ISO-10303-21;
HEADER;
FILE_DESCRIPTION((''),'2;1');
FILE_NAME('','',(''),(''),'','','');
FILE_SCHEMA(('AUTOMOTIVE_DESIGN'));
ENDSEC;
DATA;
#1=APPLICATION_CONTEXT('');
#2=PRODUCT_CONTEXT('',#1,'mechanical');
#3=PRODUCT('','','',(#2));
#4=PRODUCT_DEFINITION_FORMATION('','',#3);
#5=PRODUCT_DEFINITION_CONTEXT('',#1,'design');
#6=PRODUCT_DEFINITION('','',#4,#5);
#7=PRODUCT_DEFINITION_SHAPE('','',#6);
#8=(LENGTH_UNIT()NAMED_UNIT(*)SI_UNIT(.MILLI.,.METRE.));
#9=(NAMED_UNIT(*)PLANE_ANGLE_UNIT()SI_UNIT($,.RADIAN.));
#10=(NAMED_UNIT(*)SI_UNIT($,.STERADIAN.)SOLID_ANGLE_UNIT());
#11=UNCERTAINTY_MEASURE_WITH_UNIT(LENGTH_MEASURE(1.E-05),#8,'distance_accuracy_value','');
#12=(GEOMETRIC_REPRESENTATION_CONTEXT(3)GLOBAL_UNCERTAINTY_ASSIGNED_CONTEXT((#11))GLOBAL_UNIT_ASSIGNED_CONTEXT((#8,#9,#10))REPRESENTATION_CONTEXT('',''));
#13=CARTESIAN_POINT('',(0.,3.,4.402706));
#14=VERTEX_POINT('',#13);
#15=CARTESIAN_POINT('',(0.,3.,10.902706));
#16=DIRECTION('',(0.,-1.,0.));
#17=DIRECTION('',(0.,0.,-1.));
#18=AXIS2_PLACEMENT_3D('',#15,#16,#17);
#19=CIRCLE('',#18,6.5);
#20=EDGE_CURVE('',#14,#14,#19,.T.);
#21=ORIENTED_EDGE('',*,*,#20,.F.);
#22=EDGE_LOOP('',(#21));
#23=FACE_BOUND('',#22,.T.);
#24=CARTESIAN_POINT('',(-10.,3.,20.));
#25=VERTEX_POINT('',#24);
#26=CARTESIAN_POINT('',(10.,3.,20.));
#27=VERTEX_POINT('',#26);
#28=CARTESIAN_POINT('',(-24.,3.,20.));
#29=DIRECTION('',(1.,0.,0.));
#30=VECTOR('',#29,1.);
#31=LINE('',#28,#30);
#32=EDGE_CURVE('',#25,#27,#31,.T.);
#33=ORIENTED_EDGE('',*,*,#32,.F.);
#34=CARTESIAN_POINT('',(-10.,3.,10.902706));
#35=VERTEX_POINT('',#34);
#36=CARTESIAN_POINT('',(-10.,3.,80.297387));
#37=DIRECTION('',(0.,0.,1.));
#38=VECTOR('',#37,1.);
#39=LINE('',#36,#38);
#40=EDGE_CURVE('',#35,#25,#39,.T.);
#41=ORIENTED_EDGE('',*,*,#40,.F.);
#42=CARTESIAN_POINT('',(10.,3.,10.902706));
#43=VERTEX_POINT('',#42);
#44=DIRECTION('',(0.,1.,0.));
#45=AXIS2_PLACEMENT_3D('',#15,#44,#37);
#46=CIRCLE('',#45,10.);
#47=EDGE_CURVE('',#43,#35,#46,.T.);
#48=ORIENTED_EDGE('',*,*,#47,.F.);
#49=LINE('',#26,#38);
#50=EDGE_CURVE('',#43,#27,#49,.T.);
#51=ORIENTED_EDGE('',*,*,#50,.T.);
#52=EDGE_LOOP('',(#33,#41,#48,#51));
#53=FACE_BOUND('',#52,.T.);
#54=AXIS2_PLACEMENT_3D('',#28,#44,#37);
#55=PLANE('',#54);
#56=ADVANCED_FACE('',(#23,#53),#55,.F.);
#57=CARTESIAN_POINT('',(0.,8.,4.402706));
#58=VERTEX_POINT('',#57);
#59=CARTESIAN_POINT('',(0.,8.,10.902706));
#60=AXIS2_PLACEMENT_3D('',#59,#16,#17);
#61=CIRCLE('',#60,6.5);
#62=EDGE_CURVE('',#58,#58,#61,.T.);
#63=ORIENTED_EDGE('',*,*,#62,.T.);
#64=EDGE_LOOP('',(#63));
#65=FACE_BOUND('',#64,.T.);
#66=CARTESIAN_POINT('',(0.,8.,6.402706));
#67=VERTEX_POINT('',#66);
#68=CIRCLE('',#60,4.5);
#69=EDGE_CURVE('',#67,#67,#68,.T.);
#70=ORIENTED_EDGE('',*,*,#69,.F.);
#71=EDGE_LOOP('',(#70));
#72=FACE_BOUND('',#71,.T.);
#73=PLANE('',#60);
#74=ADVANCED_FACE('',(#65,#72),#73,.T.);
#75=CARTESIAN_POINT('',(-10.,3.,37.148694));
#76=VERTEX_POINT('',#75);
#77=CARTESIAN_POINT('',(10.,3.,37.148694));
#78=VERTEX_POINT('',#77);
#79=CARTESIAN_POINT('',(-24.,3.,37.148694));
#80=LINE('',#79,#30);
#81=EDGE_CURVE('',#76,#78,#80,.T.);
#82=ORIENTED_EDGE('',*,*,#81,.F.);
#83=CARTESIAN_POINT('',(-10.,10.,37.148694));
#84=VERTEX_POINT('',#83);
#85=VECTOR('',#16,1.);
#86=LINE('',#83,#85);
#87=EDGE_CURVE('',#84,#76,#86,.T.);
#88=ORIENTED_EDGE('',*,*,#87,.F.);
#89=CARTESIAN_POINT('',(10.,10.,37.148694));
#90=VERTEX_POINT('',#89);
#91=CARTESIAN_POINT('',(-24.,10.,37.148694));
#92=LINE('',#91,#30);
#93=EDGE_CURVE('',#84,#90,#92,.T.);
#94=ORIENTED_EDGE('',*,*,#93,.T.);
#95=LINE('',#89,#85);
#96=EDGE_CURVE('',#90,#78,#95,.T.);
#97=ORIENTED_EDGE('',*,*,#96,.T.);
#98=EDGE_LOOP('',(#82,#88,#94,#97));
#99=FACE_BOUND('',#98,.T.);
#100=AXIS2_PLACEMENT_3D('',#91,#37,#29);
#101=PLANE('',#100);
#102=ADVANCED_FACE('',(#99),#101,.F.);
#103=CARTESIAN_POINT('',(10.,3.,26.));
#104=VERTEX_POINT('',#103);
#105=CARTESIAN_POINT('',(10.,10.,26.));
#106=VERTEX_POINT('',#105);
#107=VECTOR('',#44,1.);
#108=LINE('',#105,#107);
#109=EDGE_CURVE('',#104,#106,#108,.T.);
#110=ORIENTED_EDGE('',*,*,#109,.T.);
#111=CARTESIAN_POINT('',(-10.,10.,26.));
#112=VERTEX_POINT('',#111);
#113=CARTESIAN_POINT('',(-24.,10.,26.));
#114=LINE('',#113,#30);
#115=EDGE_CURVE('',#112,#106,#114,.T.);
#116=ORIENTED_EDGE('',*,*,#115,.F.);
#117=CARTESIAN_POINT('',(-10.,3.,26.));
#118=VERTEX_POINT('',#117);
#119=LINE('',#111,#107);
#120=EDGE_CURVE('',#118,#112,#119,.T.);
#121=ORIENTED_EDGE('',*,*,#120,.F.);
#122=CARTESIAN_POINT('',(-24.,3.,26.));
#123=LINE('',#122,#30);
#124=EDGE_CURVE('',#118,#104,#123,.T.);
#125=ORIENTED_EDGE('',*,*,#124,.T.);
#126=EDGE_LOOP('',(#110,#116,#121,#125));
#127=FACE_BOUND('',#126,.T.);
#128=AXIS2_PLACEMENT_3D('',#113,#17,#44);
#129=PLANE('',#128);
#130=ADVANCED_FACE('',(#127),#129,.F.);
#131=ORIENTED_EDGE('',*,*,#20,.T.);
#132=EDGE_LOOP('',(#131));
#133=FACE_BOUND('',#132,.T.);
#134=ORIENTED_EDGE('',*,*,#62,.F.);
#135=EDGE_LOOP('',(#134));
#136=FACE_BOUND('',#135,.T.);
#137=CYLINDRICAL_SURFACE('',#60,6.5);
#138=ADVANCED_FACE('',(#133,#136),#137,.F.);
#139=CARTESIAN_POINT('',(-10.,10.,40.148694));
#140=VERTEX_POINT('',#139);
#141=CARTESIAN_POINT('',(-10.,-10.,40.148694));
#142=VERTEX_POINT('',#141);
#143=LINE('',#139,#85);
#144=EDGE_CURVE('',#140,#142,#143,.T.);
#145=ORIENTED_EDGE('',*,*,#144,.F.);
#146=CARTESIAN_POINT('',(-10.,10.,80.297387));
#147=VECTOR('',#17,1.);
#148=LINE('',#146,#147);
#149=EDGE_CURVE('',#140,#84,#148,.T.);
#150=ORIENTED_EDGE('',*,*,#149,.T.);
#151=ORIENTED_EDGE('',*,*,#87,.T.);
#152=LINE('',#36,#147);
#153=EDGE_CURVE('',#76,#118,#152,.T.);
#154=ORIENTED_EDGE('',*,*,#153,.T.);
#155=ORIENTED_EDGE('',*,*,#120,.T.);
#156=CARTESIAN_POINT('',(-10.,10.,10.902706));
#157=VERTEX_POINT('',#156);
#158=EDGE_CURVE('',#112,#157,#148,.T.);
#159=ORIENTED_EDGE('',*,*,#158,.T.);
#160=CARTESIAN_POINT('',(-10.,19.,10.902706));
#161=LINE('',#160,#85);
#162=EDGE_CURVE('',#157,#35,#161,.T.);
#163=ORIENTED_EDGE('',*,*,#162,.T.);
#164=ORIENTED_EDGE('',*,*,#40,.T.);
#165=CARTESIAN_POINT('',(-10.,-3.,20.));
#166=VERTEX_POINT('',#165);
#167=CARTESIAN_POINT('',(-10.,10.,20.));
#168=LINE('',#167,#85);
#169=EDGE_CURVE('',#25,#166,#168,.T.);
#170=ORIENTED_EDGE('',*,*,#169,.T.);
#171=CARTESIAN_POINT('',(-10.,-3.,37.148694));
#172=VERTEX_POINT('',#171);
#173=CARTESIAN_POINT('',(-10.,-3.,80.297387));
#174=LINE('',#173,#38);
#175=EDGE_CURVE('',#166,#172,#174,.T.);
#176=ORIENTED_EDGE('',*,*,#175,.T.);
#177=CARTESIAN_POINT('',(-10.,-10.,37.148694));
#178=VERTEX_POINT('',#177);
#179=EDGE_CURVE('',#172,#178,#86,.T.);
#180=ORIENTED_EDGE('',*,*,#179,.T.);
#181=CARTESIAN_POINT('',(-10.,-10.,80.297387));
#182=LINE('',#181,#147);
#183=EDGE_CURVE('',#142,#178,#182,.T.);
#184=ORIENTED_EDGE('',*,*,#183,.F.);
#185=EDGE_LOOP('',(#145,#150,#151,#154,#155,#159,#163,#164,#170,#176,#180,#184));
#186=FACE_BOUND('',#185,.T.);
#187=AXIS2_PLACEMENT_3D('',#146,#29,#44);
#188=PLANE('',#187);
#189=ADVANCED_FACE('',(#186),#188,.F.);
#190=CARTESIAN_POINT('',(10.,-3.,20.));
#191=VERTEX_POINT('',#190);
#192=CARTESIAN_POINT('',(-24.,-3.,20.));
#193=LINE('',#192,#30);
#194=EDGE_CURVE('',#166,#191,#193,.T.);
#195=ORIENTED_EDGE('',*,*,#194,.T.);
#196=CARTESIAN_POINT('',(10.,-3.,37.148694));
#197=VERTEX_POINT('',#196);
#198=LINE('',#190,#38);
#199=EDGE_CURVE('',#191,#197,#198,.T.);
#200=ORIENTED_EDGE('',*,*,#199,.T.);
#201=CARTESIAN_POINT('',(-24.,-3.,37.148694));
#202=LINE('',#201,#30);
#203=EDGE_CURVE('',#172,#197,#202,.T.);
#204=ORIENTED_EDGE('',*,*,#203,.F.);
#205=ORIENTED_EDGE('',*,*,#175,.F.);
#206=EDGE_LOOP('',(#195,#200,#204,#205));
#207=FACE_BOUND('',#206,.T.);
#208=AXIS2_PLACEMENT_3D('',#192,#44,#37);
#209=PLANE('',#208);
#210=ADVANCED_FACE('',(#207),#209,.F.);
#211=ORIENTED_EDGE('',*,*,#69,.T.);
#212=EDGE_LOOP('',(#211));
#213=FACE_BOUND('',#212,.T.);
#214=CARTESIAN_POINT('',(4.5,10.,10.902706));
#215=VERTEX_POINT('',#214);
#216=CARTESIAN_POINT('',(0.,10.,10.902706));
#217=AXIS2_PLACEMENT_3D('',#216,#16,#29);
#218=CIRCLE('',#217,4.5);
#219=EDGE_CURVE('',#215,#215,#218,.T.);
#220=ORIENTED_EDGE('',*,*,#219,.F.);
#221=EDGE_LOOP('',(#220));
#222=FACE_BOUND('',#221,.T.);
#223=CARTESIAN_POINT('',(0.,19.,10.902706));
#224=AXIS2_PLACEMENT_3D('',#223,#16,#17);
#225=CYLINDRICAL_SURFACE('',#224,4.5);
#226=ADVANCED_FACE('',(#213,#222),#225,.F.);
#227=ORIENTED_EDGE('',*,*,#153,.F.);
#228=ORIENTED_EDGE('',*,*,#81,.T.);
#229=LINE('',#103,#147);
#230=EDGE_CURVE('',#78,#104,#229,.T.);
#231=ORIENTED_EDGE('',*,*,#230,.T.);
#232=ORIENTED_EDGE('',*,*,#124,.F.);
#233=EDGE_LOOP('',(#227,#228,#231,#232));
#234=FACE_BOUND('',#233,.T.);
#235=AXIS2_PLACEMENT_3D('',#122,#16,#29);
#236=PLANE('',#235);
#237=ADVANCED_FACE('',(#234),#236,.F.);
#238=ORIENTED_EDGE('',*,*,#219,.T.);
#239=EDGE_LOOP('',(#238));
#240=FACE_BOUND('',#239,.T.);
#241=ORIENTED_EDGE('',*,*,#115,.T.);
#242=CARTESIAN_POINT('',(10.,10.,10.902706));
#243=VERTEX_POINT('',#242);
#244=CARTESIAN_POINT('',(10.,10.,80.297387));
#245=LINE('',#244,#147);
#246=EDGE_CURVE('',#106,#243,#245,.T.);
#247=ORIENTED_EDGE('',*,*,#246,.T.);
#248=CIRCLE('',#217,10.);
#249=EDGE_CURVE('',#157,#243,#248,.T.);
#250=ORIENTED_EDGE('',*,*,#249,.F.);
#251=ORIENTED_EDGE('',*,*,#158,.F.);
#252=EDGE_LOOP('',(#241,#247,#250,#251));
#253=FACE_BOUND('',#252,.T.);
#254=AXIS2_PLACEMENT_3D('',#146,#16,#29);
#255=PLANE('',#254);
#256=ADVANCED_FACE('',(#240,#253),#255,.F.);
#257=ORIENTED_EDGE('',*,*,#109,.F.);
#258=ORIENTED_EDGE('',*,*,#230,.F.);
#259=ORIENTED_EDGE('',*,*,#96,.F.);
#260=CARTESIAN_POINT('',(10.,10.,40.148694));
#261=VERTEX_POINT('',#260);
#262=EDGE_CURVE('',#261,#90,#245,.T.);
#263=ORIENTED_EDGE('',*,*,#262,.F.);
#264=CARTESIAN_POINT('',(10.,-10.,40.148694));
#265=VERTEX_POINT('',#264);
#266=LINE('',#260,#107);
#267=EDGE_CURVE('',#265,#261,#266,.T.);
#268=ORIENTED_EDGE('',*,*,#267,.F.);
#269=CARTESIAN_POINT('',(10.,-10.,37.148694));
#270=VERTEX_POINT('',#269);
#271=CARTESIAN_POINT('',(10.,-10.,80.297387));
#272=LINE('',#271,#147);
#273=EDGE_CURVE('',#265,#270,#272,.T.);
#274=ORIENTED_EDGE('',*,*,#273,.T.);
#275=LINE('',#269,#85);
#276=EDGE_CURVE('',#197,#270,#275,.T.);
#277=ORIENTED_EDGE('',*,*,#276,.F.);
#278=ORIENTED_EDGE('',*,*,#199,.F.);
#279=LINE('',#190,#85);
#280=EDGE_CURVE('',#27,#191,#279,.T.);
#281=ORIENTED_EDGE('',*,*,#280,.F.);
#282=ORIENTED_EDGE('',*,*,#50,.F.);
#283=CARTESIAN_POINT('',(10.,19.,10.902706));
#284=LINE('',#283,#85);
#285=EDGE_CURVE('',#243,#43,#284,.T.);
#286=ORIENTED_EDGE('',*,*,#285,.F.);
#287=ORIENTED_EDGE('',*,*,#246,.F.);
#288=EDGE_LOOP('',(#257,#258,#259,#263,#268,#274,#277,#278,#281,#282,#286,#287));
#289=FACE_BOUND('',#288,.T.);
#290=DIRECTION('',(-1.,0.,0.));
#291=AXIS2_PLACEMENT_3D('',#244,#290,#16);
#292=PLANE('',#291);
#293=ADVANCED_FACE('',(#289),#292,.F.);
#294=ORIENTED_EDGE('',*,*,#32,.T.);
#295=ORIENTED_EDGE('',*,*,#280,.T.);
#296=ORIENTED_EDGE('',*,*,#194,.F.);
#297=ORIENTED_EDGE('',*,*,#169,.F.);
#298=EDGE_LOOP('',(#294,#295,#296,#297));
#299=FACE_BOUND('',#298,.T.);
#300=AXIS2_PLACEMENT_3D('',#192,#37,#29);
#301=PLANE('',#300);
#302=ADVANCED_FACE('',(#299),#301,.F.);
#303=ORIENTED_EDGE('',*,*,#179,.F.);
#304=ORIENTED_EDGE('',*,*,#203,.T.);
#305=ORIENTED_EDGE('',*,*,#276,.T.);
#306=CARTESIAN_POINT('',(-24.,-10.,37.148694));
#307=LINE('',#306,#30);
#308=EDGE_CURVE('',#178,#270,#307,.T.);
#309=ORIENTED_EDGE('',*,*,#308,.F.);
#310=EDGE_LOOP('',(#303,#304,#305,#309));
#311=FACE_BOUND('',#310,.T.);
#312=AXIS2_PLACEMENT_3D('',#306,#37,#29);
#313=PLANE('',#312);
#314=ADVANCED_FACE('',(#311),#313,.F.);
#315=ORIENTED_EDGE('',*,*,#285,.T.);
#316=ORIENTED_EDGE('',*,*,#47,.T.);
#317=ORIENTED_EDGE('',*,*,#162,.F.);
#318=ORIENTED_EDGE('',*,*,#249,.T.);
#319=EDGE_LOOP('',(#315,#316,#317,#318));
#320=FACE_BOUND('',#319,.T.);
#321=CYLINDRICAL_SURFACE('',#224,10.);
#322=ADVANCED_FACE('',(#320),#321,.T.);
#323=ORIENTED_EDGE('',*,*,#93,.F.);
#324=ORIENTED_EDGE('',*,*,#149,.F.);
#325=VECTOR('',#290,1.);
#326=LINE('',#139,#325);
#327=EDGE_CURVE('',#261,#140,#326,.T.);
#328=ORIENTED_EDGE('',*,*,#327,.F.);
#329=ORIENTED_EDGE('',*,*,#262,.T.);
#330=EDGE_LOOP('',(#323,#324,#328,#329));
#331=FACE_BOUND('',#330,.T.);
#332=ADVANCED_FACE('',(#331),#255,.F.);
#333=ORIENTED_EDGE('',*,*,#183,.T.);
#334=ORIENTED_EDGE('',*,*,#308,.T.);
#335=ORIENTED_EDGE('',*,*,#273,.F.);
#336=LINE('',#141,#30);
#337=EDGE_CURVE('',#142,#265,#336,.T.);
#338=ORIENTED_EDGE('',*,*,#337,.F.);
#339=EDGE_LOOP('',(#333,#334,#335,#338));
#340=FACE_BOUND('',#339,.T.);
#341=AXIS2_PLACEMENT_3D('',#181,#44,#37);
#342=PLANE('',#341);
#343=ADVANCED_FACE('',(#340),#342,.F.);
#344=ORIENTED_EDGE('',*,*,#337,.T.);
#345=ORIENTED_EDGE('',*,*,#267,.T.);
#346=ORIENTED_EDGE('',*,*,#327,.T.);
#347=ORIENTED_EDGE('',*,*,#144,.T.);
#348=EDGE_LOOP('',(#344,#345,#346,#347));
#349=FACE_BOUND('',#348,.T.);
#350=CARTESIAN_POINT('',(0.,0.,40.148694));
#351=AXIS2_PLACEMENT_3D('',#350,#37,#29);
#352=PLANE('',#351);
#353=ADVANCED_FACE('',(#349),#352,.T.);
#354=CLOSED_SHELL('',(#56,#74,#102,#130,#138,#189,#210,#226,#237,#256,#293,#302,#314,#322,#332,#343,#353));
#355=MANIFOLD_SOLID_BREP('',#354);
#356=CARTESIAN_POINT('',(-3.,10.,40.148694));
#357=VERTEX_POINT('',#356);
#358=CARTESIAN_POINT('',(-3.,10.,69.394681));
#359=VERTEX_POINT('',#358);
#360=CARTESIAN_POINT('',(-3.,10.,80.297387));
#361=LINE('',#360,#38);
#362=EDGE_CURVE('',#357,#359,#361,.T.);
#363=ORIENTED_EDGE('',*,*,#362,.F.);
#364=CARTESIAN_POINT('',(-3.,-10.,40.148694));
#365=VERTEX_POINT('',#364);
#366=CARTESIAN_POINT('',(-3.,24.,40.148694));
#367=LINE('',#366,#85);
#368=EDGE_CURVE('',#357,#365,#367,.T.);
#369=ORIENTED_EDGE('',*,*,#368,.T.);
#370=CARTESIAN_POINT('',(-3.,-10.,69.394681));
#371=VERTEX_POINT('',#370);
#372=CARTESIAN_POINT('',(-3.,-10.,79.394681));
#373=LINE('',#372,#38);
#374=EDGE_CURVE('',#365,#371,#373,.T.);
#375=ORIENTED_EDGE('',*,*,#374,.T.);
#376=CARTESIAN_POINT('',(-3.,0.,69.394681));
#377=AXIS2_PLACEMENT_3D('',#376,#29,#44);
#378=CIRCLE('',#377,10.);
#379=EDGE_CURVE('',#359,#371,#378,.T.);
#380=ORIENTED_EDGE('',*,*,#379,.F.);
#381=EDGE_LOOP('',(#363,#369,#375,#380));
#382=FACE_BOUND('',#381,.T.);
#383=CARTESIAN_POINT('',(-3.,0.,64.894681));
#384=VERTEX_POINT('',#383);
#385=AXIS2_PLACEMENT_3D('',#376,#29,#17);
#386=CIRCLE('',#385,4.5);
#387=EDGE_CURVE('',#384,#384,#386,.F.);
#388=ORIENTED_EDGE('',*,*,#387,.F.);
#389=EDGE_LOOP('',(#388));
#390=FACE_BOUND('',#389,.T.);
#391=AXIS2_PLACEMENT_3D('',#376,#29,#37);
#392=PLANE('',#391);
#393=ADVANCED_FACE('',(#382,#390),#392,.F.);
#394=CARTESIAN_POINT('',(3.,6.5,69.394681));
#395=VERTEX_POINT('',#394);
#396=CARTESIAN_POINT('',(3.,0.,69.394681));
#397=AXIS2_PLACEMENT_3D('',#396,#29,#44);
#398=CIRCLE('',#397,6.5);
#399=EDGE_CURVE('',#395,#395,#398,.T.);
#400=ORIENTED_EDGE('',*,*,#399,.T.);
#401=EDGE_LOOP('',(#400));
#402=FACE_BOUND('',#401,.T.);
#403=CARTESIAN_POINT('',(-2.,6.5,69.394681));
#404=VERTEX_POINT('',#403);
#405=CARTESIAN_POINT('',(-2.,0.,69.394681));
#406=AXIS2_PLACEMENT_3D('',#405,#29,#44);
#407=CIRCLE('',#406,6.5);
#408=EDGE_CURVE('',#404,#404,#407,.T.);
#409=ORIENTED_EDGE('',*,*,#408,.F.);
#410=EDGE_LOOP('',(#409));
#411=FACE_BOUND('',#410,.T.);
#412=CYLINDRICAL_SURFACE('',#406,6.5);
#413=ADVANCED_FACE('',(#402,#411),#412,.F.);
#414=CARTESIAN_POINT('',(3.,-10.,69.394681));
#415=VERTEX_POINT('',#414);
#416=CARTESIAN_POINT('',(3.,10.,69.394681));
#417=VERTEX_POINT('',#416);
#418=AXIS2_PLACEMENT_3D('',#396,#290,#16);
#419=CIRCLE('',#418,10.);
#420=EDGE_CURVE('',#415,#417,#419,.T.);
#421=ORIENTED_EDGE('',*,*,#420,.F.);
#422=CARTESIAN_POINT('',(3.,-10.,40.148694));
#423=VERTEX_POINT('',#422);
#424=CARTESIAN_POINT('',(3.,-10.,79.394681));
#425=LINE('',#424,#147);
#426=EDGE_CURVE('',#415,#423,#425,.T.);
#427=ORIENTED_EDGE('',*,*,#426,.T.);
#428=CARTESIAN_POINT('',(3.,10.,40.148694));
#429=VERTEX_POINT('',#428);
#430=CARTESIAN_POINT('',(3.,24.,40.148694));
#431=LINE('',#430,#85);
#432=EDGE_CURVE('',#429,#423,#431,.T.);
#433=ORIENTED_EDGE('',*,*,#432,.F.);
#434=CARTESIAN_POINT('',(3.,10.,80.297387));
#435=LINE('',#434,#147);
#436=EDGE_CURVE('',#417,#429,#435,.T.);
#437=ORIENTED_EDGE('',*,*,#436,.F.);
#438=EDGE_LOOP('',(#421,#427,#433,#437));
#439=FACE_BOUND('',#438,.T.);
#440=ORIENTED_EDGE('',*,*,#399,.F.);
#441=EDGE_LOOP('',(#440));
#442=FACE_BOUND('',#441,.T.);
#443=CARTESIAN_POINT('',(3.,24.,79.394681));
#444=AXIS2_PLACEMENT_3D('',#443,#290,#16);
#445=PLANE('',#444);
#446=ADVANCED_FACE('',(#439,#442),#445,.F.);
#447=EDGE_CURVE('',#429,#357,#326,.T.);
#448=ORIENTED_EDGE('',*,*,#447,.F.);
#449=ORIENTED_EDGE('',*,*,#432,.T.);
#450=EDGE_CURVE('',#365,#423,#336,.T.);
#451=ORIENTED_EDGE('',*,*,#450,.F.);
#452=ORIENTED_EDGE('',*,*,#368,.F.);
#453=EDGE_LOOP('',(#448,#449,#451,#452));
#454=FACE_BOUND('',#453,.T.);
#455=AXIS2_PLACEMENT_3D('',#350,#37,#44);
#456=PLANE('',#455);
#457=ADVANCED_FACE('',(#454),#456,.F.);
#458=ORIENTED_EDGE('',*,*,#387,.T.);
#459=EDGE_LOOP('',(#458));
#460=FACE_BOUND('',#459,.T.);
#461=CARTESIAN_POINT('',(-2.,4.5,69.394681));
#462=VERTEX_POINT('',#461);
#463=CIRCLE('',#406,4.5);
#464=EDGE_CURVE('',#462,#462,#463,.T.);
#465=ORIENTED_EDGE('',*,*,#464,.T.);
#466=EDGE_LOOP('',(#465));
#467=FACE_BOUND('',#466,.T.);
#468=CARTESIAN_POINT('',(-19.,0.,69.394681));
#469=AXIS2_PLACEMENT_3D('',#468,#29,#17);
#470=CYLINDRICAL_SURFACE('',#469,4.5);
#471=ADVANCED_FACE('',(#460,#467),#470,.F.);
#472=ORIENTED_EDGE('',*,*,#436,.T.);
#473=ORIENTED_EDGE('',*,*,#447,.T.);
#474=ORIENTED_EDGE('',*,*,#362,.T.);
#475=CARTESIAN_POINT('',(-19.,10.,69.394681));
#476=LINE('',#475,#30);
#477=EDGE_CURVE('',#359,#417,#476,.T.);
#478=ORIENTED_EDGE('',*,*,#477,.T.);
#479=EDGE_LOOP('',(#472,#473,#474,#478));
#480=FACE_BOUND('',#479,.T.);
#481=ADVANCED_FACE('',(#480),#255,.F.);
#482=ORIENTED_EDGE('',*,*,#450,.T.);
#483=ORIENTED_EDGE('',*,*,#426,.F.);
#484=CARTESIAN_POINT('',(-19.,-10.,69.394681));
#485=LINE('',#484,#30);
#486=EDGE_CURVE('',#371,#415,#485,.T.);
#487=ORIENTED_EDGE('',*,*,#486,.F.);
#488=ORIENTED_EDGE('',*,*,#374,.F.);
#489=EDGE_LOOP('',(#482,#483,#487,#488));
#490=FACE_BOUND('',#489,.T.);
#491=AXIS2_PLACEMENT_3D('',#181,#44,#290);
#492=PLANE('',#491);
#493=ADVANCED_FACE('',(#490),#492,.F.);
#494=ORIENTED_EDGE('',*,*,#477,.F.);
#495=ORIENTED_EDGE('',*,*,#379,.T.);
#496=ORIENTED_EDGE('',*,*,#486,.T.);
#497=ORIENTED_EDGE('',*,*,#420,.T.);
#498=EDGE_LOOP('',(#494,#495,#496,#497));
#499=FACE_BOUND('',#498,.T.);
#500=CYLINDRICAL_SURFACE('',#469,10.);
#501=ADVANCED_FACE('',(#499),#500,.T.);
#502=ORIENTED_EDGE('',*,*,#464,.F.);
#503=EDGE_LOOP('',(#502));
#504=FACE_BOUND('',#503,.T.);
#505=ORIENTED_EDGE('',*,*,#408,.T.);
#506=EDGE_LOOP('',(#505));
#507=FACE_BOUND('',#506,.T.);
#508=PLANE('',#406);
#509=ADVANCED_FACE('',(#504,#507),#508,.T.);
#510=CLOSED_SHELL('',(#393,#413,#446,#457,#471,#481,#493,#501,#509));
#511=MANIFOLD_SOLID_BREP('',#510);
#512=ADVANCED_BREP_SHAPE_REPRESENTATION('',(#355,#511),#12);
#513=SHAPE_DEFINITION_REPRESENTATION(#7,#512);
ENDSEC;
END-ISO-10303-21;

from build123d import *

# Parameters (mm, degrees)
SKETCH_1_W          = 20
SKETCH_1_H          = 20
EXTRUDE_1_DEPTH     = 80.297387422
SKETCH_7_W          = 11.148693711
SKETCH_7_H          = 7
CUT_EXTRUDE_6_DEPTH = 34
SKETCH_2_R          = 6.5
CUT_EXTRUDE_1_DEPTH = 5
SKETCH_3_R          = 4.5
CUT_EXTRUDE_2_DEPTH = 29
MOVE_BODY_1_ANGLE   = 90
SKETCH_9_W          = 7
SKETCH_9_H          = 39.245987558
CUT_EXTRUDE_7_DEPTH = 34
SKETCH_10_R         = 6.5
CUT_EXTRUDE_8_DEPTH = 5


# Read off the part's stored shape, not the designer's step: 교차3
with BuildPart() as part:
    # 스케치1 → 보스-돌출1 (new body)
    with BuildSketch(Plane.XY):
        Rectangle(SKETCH_1_W, SKETCH_1_H)
    extrude(amount=EXTRUDE_1_DEPTH)

    # 스케치7 → 컷-돌출6 (cut)
    with BuildSketch(Plane(origin=(10, 0, 0), x_dir=(0, 0, -1), z_dir=(1, 0, 0))):
        Polygon((-20, -3), (-20, 3), (0, 3), (0, -3), (0, -10), (-37.148693711, -10), (-37.148693711, -3), align=None)
        with Locations((-31.574346855, 6.5)):
            Rectangle(SKETCH_7_W, SKETCH_7_H)
    extrude(amount=-CUT_EXTRUDE_6_DEPTH, mode=Mode.SUBTRACT)

    # 스케치2 → 컷-돌출1 (cut)
    with BuildSketch(Plane(origin=(0, 3, 0), x_dir=(-1, 0, 0), z_dir=(0, -1, 0))):
        with Locations(Location((0, -10.902706153, 0), (0, 0, 90))):
            Circle(SKETCH_2_R)
    cut_extrude_1 = extrude(amount=-CUT_EXTRUDE_1_DEPTH, mode=Mode.SUBTRACT)

    # 스케치3 → 컷-돌출2 (cut)
    with BuildSketch(Plane(origin=(0, -10, 0), x_dir=(-1, 0, 0), z_dir=(0, -1, 0))):
        with Locations(Location((0, -10.902706153, 0), (0, 0, 90))):
            Circle(SKETCH_3_R)
        with BuildLine():
            Line((-21.262122506, -10.902706153), (-10, -10.902706153))
            ThreePointArc((-10, -10.902706153), (0, -0.902706153), (10, -10.902706153))
            Line((10, -10.902706153), (21.262122506, -10.902706153))
            ThreePointArc((21.262122506, -10.902706153), (0, 10.359416353), (-21.262122506, -10.902706153))
        make_face()
    cut_extrude_2 = extrude(amount=-CUT_EXTRUDE_2_DEPTH, mode=Mode.SUBTRACT)

    # 대칭 복사6: 컷-돌출1, 컷-돌출2 across plane
    add(cut_extrude_1.mirror(Plane.XY.offset(40.148693711)), mode=Mode.SUBTRACT)
    add(cut_extrude_2.mirror(Plane.XY.offset(40.148693711)), mode=Mode.SUBTRACT)


with BuildPart() as body_2:
    # 교차3: the piece on the far side of the plane
    add(part.part)
    split(bisect_by=Plane.XY.offset(40.148693711), keep=Keep.BOTTOM)


with BuildPart() as part_1:
    add(part.part)

    # 교차3
    split(bisect_by=Plane.XY.offset(40.148693711), keep=Keep.TOP)


with BuildPart() as part_2:
    # Move Body 1: moved
    add(part_1.part.rotate(Axis((0, 0, 0), (0, 0, 1)), MOVE_BODY_1_ANGLE))

    # 스케치9 → 컷-돌출7 (cut)
    with BuildSketch(Plane.XZ.offset(10)):
        with Locations((6.5, 59.77168749)):
            Rectangle(SKETCH_9_W, SKETCH_9_H)
        with Locations((-6.5, 59.77168749)):
            Rectangle(SKETCH_9_W, SKETCH_9_H)
    extrude(amount=-CUT_EXTRUDE_7_DEPTH, mode=Mode.SUBTRACT)

    # 스케치10 → 컷-돌출8 (cut)
    with BuildSketch(Plane(origin=(3, 0, 0), x_dir=(0, 0, -1), z_dir=(1, 0, 0))):
        with Locations(Location((-69.394681269, 0, 0), (0, 0, 90))):
            Circle(SKETCH_10_R)
    extrude(amount=-CUT_EXTRUDE_8_DEPTH, mode=Mode.SUBTRACT)


solid = Compound([body_2.part, part_2.part])
